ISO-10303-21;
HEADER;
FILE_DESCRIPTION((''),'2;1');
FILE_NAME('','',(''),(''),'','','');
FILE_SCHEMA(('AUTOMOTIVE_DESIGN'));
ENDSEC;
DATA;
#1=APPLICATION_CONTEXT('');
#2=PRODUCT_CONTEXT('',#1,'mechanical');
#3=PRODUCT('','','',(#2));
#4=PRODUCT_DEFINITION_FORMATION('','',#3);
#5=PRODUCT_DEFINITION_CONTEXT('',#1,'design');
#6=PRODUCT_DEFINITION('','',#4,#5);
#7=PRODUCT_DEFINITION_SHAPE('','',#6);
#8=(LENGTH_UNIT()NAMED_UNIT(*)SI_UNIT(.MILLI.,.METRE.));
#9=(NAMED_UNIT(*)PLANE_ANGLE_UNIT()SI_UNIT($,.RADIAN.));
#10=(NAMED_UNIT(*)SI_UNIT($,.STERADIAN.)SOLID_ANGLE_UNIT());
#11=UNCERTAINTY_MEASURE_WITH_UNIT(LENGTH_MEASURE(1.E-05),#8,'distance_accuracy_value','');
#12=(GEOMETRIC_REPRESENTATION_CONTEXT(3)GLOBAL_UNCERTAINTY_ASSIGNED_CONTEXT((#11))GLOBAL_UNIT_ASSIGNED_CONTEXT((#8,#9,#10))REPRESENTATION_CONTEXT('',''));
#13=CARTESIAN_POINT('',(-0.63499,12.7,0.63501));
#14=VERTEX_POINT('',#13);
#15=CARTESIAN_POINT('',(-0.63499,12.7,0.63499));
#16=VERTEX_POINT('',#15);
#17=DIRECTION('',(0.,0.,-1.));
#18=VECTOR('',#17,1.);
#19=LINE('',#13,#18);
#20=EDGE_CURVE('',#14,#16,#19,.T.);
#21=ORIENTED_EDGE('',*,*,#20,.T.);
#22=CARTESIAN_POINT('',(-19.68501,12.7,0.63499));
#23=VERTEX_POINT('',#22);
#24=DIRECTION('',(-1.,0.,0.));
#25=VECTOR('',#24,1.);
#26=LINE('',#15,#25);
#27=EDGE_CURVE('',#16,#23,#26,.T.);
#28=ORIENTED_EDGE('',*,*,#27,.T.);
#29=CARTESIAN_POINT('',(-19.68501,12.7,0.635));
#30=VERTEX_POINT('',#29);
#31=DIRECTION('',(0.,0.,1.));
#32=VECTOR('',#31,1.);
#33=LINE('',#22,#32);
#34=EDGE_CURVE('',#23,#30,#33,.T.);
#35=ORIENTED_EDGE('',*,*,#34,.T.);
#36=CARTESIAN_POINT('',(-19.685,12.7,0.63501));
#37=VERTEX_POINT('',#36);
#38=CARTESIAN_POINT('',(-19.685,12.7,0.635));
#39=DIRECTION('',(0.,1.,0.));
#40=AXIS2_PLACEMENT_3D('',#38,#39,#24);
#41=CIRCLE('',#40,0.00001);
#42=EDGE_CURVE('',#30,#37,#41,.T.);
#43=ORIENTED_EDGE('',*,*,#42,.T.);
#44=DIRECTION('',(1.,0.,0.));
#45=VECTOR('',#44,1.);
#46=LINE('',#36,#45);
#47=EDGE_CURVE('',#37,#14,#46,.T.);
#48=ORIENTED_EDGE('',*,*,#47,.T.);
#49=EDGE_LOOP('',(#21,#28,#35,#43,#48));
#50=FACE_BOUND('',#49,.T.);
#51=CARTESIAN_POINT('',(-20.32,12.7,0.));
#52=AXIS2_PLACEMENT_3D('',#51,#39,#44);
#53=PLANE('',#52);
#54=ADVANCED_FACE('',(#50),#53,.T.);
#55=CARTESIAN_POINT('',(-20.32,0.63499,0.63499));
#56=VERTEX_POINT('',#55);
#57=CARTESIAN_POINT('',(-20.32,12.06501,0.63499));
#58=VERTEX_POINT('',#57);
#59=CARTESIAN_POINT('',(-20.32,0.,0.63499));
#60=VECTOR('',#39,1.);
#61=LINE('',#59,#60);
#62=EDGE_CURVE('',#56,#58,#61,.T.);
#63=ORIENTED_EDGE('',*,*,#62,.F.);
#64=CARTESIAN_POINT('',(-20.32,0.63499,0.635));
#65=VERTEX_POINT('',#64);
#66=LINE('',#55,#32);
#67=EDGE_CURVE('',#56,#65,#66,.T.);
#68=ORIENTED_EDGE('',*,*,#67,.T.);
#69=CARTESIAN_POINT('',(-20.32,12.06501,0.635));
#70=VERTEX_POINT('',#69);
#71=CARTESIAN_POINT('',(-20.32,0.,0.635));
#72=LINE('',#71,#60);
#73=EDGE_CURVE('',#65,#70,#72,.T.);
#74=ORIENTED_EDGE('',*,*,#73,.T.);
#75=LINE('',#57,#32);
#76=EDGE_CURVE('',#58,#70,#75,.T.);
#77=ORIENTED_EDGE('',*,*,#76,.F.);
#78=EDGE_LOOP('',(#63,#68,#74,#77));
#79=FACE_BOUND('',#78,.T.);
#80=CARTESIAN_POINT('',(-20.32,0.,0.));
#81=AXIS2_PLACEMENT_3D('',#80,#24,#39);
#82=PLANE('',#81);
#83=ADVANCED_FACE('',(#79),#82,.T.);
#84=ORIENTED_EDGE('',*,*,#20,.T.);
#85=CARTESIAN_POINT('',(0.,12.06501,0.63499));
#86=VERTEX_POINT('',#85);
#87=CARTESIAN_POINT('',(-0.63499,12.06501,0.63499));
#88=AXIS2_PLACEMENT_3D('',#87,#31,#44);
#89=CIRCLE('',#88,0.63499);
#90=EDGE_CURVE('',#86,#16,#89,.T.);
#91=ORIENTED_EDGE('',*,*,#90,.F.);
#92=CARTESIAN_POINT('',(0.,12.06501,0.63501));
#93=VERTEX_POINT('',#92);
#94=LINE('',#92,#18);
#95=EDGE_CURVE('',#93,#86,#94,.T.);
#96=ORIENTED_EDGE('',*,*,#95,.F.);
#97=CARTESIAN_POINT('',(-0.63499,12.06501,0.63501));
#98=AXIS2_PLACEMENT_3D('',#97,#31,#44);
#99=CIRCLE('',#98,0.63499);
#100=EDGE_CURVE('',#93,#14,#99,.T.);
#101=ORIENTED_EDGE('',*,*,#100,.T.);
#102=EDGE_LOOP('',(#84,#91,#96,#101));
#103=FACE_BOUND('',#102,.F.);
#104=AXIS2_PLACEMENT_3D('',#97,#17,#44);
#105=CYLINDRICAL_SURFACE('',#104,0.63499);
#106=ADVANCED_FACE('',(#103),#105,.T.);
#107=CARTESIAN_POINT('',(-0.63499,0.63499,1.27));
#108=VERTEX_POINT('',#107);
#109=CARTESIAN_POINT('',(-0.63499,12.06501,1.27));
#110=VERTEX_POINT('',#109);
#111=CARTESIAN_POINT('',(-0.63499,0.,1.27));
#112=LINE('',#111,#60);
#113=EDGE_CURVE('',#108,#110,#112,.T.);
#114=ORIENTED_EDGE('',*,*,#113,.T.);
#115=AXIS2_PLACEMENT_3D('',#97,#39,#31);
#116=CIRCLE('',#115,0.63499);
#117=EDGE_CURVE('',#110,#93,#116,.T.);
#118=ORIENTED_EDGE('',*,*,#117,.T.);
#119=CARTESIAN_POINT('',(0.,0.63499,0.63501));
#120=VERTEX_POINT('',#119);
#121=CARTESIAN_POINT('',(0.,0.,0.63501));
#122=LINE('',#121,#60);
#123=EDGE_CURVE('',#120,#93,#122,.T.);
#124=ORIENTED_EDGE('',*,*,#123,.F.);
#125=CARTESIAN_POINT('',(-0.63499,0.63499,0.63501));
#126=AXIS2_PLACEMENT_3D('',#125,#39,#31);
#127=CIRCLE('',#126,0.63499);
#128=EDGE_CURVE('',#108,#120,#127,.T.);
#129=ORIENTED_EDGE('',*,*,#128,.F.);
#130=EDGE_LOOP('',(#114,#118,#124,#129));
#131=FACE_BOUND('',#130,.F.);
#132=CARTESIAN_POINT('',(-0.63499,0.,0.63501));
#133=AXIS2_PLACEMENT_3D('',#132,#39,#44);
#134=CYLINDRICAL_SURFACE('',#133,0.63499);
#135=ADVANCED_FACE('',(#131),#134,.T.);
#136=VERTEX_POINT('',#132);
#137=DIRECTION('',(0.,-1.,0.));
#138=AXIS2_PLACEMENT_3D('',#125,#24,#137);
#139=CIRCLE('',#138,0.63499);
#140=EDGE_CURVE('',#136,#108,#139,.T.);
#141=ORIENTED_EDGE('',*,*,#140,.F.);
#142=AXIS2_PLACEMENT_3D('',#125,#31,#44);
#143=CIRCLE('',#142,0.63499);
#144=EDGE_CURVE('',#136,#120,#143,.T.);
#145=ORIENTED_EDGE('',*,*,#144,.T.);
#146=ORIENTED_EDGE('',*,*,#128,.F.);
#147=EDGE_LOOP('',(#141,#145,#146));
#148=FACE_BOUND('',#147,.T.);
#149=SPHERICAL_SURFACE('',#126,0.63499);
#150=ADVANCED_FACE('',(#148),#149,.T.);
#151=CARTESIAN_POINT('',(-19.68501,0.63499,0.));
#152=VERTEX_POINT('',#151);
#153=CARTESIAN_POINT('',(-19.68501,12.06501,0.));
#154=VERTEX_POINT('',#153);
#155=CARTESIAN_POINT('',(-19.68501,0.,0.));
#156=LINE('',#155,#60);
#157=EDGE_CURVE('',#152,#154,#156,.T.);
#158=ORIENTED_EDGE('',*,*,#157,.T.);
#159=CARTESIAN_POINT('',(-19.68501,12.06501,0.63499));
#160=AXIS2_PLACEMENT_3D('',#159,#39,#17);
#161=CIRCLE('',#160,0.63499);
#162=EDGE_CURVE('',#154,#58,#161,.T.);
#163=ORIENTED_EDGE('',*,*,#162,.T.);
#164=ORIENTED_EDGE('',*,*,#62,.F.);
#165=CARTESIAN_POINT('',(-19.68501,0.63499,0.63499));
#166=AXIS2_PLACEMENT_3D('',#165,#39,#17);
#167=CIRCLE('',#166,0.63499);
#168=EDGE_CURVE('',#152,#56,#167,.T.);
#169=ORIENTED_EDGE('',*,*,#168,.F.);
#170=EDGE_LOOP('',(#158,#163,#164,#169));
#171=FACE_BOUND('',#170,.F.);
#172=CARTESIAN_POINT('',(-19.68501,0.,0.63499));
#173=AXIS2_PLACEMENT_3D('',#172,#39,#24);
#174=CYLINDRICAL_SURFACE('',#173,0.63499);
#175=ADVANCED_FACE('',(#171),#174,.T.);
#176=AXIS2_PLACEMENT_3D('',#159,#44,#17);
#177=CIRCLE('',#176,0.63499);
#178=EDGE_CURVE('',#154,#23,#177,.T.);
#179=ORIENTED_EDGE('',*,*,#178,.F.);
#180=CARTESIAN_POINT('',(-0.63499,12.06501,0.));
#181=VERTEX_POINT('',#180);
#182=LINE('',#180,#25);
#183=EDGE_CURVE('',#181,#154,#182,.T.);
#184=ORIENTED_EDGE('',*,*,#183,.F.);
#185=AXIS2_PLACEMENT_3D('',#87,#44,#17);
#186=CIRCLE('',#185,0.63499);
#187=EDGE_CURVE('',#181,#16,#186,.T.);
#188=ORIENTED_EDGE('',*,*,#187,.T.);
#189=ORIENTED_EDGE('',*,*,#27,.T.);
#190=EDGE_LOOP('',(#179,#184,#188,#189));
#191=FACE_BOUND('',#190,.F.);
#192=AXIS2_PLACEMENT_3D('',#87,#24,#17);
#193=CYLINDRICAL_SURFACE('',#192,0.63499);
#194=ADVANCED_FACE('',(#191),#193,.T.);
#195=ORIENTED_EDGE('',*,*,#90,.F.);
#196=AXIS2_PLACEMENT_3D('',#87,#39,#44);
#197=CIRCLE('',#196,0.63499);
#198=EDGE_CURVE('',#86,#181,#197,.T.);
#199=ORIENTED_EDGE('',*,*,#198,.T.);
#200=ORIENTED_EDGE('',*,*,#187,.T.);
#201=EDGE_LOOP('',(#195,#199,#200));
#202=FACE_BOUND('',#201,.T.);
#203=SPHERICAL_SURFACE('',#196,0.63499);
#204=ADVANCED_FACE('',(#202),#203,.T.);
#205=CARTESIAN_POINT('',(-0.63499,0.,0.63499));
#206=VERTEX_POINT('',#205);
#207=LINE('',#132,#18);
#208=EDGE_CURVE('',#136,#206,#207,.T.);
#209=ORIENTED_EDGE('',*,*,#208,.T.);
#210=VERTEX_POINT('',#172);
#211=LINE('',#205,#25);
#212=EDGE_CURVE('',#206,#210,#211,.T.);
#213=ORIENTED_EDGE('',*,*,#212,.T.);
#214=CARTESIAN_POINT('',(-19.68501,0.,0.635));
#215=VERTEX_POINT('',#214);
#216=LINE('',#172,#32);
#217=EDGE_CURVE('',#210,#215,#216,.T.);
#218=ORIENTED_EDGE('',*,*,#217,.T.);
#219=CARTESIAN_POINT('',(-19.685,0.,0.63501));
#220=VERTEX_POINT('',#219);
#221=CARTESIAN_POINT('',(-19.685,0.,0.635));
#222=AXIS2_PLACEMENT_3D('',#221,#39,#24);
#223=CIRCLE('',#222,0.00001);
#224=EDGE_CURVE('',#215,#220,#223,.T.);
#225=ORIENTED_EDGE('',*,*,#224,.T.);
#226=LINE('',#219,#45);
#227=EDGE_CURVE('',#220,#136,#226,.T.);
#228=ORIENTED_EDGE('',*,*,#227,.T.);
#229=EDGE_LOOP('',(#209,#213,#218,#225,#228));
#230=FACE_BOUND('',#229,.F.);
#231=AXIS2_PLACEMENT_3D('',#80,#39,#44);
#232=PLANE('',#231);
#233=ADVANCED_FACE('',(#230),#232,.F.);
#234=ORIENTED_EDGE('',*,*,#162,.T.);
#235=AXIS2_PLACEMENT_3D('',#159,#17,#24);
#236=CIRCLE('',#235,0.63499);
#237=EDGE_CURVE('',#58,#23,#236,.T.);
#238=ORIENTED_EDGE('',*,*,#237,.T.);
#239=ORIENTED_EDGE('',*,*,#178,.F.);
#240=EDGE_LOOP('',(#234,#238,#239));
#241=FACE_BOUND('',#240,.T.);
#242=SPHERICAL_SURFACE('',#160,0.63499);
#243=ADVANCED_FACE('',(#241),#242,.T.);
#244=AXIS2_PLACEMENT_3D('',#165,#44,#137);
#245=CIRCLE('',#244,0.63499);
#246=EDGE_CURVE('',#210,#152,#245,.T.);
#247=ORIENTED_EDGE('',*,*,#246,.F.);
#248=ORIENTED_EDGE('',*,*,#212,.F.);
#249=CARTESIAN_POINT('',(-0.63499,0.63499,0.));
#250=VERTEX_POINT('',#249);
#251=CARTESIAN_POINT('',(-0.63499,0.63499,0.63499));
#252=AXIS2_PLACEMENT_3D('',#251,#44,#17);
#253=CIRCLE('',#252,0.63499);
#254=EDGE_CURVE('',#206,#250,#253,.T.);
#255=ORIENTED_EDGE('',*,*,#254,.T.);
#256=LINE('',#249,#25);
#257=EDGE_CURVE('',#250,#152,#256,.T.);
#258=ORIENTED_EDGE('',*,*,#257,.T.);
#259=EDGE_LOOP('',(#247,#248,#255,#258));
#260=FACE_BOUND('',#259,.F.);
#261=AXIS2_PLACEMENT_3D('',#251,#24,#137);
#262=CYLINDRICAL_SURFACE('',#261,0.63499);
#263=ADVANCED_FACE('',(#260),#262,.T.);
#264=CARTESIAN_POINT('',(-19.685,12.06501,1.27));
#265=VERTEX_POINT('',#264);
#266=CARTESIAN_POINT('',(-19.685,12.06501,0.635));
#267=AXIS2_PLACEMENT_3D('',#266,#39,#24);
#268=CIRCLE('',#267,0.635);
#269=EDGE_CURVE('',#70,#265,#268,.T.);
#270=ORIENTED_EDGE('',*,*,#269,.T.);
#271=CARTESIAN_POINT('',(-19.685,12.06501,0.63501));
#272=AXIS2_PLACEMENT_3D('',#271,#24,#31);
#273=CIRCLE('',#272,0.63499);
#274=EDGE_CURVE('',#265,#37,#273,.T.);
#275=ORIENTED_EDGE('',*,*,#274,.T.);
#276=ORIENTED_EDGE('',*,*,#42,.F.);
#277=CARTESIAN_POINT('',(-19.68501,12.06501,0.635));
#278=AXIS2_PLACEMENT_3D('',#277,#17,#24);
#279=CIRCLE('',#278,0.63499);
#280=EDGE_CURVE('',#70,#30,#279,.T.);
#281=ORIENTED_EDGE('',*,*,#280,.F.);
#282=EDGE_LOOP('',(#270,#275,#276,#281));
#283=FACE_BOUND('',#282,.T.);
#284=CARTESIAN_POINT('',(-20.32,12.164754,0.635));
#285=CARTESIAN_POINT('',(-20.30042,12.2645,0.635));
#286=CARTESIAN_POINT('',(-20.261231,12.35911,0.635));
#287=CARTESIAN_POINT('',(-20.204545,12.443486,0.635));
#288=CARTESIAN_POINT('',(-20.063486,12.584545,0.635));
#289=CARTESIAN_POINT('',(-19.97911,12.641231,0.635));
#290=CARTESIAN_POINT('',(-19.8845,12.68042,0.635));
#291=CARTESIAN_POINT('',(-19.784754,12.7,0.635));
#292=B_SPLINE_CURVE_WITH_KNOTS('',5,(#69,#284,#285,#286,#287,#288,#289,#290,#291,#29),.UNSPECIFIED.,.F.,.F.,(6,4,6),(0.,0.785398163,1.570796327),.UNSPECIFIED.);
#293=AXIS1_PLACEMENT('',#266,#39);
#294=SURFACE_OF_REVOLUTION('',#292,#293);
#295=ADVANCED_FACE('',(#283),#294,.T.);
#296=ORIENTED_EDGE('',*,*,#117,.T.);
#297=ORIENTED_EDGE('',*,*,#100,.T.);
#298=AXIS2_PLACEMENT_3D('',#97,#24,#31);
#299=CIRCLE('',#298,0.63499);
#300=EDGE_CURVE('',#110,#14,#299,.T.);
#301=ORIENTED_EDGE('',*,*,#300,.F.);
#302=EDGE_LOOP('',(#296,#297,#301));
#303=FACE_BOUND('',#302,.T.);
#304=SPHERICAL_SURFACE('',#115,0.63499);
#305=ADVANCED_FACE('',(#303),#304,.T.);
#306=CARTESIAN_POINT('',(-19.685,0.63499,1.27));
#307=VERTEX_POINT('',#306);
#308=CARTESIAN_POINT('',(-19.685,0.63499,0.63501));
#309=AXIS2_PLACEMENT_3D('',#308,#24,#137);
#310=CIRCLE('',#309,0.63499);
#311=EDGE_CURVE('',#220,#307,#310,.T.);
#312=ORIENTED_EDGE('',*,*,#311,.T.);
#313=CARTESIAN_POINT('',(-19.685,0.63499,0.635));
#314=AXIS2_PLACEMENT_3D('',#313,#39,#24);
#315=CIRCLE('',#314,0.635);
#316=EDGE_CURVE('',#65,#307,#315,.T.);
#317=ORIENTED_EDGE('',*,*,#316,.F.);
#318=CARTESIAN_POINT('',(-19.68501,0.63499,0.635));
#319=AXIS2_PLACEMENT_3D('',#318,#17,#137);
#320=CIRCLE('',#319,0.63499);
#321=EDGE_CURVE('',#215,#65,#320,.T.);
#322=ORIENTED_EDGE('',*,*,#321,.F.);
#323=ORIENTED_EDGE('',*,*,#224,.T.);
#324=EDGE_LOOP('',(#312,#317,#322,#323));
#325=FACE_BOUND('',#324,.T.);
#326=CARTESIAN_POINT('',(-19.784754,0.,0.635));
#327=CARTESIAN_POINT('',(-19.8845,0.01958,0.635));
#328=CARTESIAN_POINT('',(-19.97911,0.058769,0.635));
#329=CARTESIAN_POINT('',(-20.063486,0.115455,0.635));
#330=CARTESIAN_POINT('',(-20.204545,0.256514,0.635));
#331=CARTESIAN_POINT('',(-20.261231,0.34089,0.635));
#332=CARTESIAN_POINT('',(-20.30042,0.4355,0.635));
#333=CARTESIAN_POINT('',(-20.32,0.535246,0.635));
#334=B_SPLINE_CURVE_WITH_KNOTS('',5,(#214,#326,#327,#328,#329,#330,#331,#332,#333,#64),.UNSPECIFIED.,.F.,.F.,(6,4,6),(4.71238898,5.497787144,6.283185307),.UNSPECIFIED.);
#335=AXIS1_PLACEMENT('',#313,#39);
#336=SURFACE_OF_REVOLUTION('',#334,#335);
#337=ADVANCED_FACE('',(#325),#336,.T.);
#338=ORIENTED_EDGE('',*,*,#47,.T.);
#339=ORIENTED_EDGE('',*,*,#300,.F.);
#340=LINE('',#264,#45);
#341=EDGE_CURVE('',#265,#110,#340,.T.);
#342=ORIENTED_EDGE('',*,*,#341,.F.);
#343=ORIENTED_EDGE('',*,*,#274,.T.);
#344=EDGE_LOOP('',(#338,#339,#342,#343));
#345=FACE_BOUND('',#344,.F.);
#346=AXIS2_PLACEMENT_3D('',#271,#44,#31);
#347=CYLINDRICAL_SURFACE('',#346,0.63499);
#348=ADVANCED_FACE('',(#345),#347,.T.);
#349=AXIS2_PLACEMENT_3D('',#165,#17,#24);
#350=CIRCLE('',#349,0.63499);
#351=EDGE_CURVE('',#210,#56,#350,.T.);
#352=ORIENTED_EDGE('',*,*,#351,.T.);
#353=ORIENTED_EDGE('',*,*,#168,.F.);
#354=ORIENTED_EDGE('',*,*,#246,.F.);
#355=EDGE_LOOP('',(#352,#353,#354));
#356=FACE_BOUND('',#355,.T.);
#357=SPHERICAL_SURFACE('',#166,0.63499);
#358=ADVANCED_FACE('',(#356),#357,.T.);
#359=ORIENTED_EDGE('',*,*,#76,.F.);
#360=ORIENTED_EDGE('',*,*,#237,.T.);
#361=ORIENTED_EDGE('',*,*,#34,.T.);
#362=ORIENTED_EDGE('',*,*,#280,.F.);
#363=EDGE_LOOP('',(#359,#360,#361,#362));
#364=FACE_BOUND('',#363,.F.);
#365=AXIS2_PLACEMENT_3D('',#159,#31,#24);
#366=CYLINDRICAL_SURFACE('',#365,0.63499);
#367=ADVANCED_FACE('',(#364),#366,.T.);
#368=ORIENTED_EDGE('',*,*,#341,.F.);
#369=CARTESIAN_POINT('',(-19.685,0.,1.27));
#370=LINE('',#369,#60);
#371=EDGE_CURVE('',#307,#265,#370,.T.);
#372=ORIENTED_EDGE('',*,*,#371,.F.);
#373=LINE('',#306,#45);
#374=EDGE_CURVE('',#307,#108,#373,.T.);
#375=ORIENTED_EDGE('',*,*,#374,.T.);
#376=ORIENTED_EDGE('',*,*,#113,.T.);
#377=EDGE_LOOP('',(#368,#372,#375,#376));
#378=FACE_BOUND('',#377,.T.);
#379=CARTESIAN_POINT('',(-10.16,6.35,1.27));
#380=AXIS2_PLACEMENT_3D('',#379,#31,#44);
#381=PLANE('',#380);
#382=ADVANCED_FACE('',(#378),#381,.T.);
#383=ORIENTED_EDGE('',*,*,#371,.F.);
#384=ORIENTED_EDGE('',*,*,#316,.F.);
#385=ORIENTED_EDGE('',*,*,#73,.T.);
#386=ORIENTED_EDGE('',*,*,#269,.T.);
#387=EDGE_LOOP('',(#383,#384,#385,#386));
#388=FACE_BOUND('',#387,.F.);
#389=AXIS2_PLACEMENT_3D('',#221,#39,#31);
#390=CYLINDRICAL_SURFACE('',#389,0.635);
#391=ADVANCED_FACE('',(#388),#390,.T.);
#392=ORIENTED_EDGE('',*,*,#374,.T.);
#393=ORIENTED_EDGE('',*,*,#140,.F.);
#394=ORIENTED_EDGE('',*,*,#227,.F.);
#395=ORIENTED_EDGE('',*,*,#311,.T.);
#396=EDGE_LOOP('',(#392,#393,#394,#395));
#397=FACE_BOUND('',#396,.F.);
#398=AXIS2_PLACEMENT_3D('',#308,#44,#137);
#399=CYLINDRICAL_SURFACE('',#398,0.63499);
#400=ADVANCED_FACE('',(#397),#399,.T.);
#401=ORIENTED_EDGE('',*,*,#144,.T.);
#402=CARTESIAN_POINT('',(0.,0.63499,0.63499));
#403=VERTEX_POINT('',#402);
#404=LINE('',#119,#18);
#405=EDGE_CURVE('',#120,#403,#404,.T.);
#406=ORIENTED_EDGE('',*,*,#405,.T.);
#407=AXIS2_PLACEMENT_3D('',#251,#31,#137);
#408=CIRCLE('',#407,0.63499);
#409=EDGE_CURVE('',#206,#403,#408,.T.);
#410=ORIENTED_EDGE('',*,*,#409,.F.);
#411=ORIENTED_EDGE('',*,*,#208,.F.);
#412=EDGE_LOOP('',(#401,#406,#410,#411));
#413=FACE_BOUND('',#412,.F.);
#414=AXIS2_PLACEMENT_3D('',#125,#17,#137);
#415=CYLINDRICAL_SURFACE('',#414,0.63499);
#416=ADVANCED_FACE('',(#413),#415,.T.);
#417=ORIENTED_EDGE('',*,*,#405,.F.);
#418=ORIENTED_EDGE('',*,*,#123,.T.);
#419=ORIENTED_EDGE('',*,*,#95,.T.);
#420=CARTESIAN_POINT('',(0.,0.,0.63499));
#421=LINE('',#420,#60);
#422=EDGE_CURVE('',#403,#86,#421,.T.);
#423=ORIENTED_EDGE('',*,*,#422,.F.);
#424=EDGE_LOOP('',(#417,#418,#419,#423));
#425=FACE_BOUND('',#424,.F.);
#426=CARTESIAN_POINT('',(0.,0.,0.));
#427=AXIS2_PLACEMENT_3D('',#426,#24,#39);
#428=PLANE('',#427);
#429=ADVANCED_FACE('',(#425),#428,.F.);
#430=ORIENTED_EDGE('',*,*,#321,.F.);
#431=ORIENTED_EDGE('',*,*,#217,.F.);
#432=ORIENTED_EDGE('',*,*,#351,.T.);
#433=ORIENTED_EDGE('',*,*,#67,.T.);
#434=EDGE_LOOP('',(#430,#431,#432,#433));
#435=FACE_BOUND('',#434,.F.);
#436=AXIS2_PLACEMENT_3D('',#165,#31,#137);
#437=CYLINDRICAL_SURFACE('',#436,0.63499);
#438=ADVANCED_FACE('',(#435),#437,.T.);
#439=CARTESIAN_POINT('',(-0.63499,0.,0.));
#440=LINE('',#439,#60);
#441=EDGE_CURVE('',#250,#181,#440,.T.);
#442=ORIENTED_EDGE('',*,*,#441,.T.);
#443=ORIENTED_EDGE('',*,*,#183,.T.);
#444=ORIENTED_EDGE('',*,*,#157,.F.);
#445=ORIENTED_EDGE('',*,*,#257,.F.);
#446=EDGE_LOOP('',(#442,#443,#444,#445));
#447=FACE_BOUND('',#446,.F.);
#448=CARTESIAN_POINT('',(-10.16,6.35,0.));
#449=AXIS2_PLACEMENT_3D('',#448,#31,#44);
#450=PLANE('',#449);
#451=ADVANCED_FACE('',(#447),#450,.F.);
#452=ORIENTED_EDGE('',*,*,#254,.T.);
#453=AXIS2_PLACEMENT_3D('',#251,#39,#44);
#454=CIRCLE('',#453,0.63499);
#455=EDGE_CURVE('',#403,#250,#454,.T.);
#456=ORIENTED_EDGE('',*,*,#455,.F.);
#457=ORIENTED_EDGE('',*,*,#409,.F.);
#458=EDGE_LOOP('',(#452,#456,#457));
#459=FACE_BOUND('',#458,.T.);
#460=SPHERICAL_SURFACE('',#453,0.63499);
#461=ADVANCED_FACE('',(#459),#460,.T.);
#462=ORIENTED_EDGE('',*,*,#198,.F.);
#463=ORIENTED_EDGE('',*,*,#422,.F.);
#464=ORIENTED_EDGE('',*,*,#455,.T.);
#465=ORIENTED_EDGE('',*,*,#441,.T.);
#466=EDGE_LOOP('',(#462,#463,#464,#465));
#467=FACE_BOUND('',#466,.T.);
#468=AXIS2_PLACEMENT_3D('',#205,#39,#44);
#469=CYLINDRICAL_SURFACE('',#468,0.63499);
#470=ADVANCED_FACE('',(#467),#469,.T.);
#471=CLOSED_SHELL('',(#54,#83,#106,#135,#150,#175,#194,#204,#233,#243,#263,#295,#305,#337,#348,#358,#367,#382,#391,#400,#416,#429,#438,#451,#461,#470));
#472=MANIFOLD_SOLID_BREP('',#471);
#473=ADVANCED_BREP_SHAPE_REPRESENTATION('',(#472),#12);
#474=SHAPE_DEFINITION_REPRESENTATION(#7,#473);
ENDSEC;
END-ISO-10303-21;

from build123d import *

# Parameters (mm, degrees)
F0_W     = 20.32
F0_H     = 12.7
F1_DEPTH = 1.27
F2_R     = 0.63499
F3_R     = 0.635
F4_R     = 0.63499
F5_R     = 0.63499
F6_R     = 0.63499
F7_W     = 17.7417555824
F7_H     = 10.0744650699
F8_DEPTH = 1.27


# Not quite as in the source:
# - a fillet or chamfer is up to 0.001 mm smaller than in the source, because OpenCascade refuses the exact size


with BuildPart() as f1:
    # F0 (on Top) → F1 (new body)
    with BuildSketch(Plane.XY):
        with Locations((-10.16, 6.35)):
            Rectangle(F0_W, F0_H)
    extrude(amount=F1_DEPTH)

    # F2 (radius 0.635 in the source; OpenCascade refuses exactly that, so slightly less here)
    f2_edges = [f1.edges().sort_by_distance(p)[0] for p in [
        (0, 6.35, 1.27),
        (0, 6.35, 0),
    ]]
    fillet(f2_edges, radius=F2_R)

    # F3
    f3_edges = [f1.edges().sort_by_distance(p)[0] for p in [
        (-20.32, 6.35, 1.27),
    ]]
    fillet(f3_edges, radius=F3_R)

    # F4 (radius 0.635 in the source; OpenCascade refuses exactly that, so slightly less here)
    f4_edges = [f1.edges().sort_by_distance(p)[0] for p in [
        (-20.32, 6.35, 0),
    ]]
    fillet(f4_edges, radius=F4_R)

    # F5 (radius 0.635 in the source; OpenCascade refuses exactly that, so slightly less here)
    f5_edges = [f1.edges().sort_by_distance(p)[0] for p in [
        (-10.159995, 12.7, 1.27),
    ]]
    fillet(f5_edges, radius=F5_R)

    # F6 (radius 0.635 in the source; OpenCascade refuses exactly that, so slightly less here)
    f6_edges = [f1.edges().sort_by_distance(p)[0] for p in [
        (-10.159995, 0, 1.27),
    ]]
    fillet(f6_edges, radius=F6_R)

    # F7 (on Top) → F8 (join)
    with BuildSketch(Plane.XY):
        with Locations((-10.1206521504, 6.3767505344)):
            Rectangle(F7_W, F7_H)
    extrude(amount=F8_DEPTH)


solid = f1.part
